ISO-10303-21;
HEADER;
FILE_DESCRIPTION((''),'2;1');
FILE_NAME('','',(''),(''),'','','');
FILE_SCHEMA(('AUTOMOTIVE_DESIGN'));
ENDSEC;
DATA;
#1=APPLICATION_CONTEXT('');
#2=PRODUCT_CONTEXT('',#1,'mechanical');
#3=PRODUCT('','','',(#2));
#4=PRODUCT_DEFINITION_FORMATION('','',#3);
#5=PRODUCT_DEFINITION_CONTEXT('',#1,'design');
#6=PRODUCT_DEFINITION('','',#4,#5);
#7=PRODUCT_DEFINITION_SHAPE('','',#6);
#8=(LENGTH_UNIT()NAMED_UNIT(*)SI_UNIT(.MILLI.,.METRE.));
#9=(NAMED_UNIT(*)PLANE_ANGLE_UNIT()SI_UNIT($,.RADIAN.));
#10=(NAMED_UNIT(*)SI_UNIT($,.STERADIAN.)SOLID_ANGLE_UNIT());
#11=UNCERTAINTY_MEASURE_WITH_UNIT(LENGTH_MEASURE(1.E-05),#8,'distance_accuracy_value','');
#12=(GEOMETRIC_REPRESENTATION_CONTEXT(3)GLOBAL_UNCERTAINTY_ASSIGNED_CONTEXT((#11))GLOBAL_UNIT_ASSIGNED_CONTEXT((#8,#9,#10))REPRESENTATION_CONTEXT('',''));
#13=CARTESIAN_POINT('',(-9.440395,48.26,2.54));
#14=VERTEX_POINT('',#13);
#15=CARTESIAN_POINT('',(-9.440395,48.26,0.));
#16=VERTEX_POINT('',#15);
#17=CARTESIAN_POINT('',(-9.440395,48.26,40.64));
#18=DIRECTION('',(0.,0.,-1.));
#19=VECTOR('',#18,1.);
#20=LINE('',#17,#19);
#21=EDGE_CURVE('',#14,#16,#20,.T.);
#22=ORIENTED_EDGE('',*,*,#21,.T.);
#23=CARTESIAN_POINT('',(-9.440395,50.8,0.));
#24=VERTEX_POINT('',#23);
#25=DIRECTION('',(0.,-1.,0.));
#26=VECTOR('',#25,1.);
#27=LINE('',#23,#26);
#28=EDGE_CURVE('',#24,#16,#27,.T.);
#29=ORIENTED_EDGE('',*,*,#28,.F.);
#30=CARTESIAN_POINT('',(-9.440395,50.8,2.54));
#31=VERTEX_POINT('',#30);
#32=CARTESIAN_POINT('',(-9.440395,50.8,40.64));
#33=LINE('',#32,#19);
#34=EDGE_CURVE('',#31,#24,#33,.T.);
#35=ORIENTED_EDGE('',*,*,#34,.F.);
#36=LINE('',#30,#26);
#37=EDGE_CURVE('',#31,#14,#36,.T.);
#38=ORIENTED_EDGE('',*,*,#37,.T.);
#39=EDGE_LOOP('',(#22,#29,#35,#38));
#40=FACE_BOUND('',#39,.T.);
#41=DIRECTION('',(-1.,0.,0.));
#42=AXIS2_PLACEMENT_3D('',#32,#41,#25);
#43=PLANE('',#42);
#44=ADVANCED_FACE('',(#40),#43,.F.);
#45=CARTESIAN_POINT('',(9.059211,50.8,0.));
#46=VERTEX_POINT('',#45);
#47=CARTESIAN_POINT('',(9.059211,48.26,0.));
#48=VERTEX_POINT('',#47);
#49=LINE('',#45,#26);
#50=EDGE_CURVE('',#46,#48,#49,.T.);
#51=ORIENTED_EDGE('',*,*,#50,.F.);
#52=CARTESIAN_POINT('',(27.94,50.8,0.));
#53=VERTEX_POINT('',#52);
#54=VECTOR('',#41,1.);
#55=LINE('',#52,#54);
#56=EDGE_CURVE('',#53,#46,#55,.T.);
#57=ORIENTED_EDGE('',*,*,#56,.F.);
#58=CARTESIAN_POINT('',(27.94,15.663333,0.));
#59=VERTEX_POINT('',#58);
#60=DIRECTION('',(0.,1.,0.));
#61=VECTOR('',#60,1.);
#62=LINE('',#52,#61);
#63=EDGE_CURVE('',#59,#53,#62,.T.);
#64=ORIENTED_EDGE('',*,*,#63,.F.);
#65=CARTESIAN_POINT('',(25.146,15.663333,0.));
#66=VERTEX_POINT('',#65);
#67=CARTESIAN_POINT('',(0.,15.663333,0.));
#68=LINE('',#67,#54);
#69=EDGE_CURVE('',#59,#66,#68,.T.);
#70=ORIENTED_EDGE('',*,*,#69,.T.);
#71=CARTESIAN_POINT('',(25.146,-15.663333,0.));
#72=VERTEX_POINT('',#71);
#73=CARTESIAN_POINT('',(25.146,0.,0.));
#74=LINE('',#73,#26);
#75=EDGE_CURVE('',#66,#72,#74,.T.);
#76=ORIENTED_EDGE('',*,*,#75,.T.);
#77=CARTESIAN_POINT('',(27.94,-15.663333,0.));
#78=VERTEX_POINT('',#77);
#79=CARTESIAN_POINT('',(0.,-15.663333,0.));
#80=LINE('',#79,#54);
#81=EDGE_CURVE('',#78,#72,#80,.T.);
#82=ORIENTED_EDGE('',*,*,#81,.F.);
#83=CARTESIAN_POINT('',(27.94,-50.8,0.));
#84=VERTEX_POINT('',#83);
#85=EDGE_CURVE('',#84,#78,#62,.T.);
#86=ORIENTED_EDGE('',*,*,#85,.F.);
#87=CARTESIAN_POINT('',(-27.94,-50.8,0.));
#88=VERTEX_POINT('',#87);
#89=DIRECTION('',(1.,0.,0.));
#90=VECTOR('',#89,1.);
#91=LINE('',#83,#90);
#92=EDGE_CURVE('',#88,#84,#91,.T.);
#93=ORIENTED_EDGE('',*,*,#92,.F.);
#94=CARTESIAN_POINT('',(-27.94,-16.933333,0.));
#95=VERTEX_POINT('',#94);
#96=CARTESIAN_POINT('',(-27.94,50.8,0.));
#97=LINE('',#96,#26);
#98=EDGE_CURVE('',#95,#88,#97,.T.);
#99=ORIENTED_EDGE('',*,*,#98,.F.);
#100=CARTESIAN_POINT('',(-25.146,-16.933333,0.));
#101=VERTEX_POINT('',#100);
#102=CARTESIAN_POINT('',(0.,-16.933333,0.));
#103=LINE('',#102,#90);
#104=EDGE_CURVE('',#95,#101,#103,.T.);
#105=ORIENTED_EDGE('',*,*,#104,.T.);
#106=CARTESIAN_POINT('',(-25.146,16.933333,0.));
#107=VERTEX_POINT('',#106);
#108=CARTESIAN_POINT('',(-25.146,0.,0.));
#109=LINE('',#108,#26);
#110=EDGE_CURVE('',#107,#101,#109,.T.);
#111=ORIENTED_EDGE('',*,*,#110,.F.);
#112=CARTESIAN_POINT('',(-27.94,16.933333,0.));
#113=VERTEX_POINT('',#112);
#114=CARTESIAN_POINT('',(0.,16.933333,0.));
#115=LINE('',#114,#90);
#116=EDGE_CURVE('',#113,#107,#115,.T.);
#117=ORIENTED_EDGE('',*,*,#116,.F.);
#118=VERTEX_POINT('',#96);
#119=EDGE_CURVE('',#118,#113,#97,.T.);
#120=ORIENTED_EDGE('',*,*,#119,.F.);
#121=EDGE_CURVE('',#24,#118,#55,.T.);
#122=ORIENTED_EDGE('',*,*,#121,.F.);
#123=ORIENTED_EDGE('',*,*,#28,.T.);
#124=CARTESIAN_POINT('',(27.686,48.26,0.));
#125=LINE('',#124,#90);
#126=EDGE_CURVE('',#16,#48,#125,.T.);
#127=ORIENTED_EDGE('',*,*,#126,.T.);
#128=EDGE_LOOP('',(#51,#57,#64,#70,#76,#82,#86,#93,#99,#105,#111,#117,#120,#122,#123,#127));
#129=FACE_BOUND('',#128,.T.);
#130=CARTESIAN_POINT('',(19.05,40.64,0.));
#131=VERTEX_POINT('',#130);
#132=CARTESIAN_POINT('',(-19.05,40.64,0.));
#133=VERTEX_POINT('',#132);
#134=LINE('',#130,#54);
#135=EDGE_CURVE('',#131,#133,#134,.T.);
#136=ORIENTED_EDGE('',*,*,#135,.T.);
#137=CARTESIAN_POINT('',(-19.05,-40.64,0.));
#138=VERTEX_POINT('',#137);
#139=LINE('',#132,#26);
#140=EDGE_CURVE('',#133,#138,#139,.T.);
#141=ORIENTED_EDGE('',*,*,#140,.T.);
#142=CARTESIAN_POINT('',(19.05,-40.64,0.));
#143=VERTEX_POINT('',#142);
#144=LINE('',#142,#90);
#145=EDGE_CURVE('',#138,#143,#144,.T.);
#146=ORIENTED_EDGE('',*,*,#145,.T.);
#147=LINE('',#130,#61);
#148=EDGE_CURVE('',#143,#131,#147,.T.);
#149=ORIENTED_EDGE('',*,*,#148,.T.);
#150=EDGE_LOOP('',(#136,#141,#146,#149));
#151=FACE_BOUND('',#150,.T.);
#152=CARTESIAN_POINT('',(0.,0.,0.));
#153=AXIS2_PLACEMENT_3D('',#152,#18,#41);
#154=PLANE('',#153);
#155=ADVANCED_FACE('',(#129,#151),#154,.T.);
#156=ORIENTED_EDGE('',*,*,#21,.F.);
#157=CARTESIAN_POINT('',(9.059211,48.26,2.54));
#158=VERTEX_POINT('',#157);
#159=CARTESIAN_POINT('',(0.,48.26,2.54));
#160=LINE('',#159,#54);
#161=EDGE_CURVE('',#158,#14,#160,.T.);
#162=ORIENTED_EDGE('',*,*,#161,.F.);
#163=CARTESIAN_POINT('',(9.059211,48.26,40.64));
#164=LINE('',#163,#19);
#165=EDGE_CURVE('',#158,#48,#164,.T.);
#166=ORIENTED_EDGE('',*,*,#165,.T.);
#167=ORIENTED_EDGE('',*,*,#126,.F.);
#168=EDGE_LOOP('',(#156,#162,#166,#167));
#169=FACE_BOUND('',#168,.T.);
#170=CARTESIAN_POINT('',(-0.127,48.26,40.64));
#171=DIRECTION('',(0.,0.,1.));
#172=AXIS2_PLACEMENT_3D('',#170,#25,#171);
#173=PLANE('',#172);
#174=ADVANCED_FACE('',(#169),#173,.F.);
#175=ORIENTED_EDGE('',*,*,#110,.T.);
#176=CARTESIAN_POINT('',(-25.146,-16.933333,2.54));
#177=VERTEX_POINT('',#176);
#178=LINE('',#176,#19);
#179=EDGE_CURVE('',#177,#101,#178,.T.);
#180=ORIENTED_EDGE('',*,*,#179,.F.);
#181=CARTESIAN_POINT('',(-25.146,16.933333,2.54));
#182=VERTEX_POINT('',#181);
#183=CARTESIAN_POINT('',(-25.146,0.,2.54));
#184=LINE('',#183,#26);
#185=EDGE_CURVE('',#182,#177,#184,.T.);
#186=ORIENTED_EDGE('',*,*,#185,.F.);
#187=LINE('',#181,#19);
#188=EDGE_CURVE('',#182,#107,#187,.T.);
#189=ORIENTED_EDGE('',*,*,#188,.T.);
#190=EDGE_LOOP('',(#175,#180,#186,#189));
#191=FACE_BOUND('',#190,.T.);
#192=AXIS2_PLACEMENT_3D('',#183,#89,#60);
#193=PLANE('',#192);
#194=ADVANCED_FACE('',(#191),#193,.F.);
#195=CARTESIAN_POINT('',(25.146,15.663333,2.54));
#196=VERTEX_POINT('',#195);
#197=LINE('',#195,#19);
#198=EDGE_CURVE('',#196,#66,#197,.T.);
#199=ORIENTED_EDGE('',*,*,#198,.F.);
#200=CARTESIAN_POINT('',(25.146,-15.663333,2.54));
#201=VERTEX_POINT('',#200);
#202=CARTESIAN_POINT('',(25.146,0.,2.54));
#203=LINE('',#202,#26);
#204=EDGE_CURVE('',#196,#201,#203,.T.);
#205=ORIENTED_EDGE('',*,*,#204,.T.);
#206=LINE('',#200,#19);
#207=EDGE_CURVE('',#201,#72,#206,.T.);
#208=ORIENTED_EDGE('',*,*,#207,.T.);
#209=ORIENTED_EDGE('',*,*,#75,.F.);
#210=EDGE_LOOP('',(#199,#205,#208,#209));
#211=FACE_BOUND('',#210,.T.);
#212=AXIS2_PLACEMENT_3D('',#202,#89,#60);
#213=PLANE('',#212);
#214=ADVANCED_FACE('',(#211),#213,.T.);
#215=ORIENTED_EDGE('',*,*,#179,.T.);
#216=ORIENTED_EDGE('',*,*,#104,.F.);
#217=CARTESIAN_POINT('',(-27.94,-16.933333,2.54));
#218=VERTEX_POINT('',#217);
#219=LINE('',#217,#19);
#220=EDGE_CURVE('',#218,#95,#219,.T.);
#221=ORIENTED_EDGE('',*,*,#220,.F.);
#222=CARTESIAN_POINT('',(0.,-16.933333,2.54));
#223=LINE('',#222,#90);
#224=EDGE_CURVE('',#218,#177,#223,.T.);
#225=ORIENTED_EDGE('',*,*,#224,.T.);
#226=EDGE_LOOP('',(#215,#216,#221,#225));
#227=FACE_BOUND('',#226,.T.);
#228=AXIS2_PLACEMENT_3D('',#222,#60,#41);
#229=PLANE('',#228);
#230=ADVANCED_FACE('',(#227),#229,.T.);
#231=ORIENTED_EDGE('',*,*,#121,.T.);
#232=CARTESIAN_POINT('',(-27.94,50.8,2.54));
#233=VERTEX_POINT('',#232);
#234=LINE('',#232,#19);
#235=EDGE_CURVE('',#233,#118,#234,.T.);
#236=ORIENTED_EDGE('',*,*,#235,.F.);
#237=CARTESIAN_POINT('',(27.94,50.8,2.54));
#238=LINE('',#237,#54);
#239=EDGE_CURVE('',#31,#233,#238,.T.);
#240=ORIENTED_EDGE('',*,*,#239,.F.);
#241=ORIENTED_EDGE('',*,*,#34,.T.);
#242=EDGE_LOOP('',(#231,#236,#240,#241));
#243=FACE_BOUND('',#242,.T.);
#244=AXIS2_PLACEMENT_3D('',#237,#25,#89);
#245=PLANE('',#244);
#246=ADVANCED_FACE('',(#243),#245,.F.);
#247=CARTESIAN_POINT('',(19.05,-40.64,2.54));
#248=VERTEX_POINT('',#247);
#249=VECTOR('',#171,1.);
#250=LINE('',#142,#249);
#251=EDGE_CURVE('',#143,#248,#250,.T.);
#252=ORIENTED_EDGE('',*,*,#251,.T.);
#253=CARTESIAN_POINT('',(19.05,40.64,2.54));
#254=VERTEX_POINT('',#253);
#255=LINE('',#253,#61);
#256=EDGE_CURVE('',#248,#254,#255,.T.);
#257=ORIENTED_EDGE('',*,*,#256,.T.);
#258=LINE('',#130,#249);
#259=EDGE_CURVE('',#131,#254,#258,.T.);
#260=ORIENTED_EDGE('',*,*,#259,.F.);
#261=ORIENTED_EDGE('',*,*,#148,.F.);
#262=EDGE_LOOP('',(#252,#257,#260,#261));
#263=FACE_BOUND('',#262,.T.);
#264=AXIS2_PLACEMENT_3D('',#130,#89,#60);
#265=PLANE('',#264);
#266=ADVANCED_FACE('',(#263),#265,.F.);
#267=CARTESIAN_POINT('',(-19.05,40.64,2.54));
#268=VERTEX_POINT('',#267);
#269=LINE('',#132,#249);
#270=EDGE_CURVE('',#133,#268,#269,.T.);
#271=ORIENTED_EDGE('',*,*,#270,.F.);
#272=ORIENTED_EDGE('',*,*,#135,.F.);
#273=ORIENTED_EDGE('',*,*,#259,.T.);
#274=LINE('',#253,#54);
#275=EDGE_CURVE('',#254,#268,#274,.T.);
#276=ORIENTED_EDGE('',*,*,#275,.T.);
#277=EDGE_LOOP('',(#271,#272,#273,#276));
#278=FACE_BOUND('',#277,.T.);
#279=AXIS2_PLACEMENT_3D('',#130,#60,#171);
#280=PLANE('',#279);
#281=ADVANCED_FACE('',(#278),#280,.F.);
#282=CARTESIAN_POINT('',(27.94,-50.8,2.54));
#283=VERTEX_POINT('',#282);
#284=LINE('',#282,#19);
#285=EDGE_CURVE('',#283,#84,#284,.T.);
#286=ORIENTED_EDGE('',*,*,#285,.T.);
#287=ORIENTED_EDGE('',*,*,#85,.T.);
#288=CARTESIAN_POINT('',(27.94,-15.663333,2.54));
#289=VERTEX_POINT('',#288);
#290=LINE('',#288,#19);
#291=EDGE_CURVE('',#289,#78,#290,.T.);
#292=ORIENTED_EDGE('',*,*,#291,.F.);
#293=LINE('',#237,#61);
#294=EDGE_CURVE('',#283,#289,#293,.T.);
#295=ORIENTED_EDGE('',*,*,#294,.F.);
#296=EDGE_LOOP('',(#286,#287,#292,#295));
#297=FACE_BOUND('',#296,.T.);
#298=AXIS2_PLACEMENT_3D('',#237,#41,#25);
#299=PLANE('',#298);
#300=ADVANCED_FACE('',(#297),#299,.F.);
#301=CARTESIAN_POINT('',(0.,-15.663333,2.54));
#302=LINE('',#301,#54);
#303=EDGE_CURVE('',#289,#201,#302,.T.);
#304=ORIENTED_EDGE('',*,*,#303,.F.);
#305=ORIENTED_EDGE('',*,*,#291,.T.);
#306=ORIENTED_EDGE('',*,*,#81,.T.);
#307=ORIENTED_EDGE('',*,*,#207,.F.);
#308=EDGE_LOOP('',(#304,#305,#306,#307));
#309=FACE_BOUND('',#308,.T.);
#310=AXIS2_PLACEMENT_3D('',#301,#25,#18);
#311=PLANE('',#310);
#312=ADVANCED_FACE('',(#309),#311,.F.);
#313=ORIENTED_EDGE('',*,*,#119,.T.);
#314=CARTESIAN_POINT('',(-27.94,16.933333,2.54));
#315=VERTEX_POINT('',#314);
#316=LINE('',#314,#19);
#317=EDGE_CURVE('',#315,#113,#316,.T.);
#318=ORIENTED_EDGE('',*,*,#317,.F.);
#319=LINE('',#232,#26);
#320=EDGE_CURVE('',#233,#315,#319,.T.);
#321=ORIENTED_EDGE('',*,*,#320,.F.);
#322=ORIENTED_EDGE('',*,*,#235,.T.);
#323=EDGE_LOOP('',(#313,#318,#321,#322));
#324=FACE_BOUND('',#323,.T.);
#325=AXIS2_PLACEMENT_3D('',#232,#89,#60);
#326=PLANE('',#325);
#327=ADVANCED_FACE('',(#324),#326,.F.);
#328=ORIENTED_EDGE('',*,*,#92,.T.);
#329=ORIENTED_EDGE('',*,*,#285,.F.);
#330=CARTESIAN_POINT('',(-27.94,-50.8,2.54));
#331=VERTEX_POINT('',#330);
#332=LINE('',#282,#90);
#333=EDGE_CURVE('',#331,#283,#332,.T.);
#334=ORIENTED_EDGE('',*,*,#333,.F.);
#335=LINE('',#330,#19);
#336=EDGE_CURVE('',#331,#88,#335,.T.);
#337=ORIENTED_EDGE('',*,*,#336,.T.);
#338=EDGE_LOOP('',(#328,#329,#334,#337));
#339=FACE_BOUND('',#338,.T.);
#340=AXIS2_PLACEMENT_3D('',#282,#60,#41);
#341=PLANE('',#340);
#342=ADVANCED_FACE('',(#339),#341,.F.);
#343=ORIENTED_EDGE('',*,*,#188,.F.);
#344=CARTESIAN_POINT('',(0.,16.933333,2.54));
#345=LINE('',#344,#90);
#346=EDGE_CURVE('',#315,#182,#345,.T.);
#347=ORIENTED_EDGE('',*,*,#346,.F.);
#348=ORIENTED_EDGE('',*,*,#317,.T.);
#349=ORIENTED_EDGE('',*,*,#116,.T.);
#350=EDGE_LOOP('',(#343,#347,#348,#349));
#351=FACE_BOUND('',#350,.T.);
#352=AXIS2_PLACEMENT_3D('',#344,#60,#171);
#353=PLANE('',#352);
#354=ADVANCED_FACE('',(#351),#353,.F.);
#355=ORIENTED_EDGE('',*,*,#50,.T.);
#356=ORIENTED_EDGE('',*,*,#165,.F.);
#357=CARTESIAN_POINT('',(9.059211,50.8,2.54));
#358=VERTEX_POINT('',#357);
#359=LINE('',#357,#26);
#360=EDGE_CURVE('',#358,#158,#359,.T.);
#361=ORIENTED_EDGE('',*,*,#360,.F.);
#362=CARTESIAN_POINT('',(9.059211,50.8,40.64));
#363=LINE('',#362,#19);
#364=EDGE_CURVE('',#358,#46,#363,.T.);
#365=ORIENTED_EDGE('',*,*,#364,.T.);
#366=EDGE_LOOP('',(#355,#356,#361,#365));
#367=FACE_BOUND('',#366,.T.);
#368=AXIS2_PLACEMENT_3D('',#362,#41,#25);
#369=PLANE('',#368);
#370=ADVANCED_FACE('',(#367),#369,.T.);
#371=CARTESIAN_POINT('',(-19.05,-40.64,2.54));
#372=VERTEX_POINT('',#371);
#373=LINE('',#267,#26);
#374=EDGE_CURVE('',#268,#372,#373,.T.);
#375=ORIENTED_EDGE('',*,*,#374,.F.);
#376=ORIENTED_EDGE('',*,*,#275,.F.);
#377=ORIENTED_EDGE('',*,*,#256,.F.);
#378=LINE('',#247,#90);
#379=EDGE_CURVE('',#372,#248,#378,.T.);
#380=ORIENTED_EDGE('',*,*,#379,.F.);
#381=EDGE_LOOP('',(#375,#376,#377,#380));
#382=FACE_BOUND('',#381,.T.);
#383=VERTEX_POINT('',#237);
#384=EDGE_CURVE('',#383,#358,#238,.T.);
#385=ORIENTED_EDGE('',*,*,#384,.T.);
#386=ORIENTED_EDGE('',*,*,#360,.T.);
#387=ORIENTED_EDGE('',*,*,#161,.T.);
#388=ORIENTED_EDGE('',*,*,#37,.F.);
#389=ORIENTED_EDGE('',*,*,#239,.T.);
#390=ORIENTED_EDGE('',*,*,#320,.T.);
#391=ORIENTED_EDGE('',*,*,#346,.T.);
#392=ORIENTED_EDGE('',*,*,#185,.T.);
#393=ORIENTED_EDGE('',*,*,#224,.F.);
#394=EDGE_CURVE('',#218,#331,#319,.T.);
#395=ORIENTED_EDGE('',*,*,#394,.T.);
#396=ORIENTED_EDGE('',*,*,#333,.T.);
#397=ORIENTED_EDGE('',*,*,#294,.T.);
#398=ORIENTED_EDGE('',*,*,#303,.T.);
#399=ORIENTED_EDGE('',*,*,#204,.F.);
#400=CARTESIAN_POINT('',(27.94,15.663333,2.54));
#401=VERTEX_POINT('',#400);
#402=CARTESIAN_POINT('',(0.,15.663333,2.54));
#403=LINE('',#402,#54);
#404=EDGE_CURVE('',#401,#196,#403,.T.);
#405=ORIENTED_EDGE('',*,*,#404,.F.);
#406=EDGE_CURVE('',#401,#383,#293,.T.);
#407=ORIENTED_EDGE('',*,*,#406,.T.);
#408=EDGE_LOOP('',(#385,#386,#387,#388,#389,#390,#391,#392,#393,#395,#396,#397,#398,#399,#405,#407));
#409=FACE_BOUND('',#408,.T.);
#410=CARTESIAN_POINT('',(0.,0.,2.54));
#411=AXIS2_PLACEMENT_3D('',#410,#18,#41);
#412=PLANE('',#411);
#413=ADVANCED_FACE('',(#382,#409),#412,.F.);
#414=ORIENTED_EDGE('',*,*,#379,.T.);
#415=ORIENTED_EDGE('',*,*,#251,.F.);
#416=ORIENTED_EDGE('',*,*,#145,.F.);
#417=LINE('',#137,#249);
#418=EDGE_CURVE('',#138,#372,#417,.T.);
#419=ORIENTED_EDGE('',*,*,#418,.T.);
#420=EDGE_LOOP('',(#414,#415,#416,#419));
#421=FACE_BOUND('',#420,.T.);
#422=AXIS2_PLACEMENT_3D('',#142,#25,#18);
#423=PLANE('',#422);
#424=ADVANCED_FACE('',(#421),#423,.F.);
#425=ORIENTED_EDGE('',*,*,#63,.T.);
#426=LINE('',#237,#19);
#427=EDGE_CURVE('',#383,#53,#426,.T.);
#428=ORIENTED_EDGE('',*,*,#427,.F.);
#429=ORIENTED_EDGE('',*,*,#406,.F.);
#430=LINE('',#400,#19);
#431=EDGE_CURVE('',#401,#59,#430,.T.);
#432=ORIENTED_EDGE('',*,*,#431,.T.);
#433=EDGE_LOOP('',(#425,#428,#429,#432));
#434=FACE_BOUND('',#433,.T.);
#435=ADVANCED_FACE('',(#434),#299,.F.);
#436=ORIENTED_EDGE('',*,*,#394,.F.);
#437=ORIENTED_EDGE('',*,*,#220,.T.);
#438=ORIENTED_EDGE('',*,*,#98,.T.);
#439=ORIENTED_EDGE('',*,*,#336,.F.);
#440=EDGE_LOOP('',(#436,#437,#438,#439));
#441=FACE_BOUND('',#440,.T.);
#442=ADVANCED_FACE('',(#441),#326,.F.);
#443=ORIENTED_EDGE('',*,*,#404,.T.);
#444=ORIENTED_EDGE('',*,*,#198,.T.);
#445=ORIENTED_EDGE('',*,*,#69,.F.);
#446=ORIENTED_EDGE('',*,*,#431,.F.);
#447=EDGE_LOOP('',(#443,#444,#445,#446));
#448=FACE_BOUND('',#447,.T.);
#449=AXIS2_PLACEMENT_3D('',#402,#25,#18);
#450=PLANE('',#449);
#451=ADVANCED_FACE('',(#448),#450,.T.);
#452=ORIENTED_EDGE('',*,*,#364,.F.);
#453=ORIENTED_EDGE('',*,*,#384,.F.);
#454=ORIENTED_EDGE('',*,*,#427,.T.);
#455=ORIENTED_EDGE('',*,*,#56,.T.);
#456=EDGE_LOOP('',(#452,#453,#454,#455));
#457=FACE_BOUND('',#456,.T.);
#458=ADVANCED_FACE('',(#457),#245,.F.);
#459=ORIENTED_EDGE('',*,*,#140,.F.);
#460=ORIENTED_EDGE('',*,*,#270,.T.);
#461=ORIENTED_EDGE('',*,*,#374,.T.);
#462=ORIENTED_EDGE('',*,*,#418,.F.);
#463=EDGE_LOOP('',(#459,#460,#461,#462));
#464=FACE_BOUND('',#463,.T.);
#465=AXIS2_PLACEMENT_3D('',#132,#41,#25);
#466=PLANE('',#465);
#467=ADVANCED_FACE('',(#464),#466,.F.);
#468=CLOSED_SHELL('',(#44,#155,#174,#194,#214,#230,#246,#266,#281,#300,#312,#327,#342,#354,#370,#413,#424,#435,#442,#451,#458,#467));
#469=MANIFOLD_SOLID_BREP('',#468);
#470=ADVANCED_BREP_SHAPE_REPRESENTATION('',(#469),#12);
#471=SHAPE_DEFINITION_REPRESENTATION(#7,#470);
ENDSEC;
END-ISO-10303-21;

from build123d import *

# Parameters (mm, degrees)
SKETCH1_W           = 55.88
SKETCH1_H           = 101.6
BOSS_EXTRUDE1_DEPTH = 2.54
SKETCH2_W           = 2.794
SKETCH2_H           = 31.326666666
SKETCH2_H_2         = 33.866666666
CUT_EXTRUDE1_DEPTH  = 59.032191067
SKETCH3_W           = 38.1
SKETCH3_H           = 81.28
CUT_EXTRUDE2_DEPTH  = 59.032191067
CAVITY1_START       = 48.26
CAVITY1_OUTLINE_W   = 18.499605322
CAVITY1_OUTLINE_H   = 2.54
CAVITY1_DEPTH       = 2.54


# Read off the part's stored shape, not the designer's step: Cavity1
with BuildPart() as part:
    # Sketch1 → Boss-Extrude1 (new body)
    with BuildSketch(Plane.XY):
        Rectangle(SKETCH1_W, SKETCH1_H)
    extrude(amount=BOSS_EXTRUDE1_DEPTH)

    # Sketch2 → Cut-Extrude1 (cut, through all)
    with BuildSketch(Plane(origin=(0, 0, 0), x_dir=(-1, 0, 0), z_dir=(0, 0, -1))):
        with Locations((-26.543, 0)):
            Rectangle(SKETCH2_W, SKETCH2_H)
        with Locations((26.543, 0)):
            Rectangle(SKETCH2_W, SKETCH2_H_2)
    extrude(amount=-CUT_EXTRUDE1_DEPTH, mode=Mode.SUBTRACT)

    # Sketch3 → Cut-Extrude2 (cut, through all)
    with BuildSketch(Plane.XY.offset(2.54)):
        Rectangle(SKETCH3_W, SKETCH3_H)
    extrude(amount=-CUT_EXTRUDE2_DEPTH, mode=Mode.SUBTRACT)

    # Cavity1 outline → Cavity1 (cut)
    with BuildSketch(Plane(origin=(0, 0, 0), x_dir=(1, 0, 0), z_dir=(0, 1, 0)).offset(CAVITY1_START)):
        with Locations((-0.190592016, -1.27)):
            Rectangle(CAVITY1_OUTLINE_W, CAVITY1_OUTLINE_H)
    extrude(amount=CAVITY1_DEPTH, mode=Mode.SUBTRACT)


solid = part.part
